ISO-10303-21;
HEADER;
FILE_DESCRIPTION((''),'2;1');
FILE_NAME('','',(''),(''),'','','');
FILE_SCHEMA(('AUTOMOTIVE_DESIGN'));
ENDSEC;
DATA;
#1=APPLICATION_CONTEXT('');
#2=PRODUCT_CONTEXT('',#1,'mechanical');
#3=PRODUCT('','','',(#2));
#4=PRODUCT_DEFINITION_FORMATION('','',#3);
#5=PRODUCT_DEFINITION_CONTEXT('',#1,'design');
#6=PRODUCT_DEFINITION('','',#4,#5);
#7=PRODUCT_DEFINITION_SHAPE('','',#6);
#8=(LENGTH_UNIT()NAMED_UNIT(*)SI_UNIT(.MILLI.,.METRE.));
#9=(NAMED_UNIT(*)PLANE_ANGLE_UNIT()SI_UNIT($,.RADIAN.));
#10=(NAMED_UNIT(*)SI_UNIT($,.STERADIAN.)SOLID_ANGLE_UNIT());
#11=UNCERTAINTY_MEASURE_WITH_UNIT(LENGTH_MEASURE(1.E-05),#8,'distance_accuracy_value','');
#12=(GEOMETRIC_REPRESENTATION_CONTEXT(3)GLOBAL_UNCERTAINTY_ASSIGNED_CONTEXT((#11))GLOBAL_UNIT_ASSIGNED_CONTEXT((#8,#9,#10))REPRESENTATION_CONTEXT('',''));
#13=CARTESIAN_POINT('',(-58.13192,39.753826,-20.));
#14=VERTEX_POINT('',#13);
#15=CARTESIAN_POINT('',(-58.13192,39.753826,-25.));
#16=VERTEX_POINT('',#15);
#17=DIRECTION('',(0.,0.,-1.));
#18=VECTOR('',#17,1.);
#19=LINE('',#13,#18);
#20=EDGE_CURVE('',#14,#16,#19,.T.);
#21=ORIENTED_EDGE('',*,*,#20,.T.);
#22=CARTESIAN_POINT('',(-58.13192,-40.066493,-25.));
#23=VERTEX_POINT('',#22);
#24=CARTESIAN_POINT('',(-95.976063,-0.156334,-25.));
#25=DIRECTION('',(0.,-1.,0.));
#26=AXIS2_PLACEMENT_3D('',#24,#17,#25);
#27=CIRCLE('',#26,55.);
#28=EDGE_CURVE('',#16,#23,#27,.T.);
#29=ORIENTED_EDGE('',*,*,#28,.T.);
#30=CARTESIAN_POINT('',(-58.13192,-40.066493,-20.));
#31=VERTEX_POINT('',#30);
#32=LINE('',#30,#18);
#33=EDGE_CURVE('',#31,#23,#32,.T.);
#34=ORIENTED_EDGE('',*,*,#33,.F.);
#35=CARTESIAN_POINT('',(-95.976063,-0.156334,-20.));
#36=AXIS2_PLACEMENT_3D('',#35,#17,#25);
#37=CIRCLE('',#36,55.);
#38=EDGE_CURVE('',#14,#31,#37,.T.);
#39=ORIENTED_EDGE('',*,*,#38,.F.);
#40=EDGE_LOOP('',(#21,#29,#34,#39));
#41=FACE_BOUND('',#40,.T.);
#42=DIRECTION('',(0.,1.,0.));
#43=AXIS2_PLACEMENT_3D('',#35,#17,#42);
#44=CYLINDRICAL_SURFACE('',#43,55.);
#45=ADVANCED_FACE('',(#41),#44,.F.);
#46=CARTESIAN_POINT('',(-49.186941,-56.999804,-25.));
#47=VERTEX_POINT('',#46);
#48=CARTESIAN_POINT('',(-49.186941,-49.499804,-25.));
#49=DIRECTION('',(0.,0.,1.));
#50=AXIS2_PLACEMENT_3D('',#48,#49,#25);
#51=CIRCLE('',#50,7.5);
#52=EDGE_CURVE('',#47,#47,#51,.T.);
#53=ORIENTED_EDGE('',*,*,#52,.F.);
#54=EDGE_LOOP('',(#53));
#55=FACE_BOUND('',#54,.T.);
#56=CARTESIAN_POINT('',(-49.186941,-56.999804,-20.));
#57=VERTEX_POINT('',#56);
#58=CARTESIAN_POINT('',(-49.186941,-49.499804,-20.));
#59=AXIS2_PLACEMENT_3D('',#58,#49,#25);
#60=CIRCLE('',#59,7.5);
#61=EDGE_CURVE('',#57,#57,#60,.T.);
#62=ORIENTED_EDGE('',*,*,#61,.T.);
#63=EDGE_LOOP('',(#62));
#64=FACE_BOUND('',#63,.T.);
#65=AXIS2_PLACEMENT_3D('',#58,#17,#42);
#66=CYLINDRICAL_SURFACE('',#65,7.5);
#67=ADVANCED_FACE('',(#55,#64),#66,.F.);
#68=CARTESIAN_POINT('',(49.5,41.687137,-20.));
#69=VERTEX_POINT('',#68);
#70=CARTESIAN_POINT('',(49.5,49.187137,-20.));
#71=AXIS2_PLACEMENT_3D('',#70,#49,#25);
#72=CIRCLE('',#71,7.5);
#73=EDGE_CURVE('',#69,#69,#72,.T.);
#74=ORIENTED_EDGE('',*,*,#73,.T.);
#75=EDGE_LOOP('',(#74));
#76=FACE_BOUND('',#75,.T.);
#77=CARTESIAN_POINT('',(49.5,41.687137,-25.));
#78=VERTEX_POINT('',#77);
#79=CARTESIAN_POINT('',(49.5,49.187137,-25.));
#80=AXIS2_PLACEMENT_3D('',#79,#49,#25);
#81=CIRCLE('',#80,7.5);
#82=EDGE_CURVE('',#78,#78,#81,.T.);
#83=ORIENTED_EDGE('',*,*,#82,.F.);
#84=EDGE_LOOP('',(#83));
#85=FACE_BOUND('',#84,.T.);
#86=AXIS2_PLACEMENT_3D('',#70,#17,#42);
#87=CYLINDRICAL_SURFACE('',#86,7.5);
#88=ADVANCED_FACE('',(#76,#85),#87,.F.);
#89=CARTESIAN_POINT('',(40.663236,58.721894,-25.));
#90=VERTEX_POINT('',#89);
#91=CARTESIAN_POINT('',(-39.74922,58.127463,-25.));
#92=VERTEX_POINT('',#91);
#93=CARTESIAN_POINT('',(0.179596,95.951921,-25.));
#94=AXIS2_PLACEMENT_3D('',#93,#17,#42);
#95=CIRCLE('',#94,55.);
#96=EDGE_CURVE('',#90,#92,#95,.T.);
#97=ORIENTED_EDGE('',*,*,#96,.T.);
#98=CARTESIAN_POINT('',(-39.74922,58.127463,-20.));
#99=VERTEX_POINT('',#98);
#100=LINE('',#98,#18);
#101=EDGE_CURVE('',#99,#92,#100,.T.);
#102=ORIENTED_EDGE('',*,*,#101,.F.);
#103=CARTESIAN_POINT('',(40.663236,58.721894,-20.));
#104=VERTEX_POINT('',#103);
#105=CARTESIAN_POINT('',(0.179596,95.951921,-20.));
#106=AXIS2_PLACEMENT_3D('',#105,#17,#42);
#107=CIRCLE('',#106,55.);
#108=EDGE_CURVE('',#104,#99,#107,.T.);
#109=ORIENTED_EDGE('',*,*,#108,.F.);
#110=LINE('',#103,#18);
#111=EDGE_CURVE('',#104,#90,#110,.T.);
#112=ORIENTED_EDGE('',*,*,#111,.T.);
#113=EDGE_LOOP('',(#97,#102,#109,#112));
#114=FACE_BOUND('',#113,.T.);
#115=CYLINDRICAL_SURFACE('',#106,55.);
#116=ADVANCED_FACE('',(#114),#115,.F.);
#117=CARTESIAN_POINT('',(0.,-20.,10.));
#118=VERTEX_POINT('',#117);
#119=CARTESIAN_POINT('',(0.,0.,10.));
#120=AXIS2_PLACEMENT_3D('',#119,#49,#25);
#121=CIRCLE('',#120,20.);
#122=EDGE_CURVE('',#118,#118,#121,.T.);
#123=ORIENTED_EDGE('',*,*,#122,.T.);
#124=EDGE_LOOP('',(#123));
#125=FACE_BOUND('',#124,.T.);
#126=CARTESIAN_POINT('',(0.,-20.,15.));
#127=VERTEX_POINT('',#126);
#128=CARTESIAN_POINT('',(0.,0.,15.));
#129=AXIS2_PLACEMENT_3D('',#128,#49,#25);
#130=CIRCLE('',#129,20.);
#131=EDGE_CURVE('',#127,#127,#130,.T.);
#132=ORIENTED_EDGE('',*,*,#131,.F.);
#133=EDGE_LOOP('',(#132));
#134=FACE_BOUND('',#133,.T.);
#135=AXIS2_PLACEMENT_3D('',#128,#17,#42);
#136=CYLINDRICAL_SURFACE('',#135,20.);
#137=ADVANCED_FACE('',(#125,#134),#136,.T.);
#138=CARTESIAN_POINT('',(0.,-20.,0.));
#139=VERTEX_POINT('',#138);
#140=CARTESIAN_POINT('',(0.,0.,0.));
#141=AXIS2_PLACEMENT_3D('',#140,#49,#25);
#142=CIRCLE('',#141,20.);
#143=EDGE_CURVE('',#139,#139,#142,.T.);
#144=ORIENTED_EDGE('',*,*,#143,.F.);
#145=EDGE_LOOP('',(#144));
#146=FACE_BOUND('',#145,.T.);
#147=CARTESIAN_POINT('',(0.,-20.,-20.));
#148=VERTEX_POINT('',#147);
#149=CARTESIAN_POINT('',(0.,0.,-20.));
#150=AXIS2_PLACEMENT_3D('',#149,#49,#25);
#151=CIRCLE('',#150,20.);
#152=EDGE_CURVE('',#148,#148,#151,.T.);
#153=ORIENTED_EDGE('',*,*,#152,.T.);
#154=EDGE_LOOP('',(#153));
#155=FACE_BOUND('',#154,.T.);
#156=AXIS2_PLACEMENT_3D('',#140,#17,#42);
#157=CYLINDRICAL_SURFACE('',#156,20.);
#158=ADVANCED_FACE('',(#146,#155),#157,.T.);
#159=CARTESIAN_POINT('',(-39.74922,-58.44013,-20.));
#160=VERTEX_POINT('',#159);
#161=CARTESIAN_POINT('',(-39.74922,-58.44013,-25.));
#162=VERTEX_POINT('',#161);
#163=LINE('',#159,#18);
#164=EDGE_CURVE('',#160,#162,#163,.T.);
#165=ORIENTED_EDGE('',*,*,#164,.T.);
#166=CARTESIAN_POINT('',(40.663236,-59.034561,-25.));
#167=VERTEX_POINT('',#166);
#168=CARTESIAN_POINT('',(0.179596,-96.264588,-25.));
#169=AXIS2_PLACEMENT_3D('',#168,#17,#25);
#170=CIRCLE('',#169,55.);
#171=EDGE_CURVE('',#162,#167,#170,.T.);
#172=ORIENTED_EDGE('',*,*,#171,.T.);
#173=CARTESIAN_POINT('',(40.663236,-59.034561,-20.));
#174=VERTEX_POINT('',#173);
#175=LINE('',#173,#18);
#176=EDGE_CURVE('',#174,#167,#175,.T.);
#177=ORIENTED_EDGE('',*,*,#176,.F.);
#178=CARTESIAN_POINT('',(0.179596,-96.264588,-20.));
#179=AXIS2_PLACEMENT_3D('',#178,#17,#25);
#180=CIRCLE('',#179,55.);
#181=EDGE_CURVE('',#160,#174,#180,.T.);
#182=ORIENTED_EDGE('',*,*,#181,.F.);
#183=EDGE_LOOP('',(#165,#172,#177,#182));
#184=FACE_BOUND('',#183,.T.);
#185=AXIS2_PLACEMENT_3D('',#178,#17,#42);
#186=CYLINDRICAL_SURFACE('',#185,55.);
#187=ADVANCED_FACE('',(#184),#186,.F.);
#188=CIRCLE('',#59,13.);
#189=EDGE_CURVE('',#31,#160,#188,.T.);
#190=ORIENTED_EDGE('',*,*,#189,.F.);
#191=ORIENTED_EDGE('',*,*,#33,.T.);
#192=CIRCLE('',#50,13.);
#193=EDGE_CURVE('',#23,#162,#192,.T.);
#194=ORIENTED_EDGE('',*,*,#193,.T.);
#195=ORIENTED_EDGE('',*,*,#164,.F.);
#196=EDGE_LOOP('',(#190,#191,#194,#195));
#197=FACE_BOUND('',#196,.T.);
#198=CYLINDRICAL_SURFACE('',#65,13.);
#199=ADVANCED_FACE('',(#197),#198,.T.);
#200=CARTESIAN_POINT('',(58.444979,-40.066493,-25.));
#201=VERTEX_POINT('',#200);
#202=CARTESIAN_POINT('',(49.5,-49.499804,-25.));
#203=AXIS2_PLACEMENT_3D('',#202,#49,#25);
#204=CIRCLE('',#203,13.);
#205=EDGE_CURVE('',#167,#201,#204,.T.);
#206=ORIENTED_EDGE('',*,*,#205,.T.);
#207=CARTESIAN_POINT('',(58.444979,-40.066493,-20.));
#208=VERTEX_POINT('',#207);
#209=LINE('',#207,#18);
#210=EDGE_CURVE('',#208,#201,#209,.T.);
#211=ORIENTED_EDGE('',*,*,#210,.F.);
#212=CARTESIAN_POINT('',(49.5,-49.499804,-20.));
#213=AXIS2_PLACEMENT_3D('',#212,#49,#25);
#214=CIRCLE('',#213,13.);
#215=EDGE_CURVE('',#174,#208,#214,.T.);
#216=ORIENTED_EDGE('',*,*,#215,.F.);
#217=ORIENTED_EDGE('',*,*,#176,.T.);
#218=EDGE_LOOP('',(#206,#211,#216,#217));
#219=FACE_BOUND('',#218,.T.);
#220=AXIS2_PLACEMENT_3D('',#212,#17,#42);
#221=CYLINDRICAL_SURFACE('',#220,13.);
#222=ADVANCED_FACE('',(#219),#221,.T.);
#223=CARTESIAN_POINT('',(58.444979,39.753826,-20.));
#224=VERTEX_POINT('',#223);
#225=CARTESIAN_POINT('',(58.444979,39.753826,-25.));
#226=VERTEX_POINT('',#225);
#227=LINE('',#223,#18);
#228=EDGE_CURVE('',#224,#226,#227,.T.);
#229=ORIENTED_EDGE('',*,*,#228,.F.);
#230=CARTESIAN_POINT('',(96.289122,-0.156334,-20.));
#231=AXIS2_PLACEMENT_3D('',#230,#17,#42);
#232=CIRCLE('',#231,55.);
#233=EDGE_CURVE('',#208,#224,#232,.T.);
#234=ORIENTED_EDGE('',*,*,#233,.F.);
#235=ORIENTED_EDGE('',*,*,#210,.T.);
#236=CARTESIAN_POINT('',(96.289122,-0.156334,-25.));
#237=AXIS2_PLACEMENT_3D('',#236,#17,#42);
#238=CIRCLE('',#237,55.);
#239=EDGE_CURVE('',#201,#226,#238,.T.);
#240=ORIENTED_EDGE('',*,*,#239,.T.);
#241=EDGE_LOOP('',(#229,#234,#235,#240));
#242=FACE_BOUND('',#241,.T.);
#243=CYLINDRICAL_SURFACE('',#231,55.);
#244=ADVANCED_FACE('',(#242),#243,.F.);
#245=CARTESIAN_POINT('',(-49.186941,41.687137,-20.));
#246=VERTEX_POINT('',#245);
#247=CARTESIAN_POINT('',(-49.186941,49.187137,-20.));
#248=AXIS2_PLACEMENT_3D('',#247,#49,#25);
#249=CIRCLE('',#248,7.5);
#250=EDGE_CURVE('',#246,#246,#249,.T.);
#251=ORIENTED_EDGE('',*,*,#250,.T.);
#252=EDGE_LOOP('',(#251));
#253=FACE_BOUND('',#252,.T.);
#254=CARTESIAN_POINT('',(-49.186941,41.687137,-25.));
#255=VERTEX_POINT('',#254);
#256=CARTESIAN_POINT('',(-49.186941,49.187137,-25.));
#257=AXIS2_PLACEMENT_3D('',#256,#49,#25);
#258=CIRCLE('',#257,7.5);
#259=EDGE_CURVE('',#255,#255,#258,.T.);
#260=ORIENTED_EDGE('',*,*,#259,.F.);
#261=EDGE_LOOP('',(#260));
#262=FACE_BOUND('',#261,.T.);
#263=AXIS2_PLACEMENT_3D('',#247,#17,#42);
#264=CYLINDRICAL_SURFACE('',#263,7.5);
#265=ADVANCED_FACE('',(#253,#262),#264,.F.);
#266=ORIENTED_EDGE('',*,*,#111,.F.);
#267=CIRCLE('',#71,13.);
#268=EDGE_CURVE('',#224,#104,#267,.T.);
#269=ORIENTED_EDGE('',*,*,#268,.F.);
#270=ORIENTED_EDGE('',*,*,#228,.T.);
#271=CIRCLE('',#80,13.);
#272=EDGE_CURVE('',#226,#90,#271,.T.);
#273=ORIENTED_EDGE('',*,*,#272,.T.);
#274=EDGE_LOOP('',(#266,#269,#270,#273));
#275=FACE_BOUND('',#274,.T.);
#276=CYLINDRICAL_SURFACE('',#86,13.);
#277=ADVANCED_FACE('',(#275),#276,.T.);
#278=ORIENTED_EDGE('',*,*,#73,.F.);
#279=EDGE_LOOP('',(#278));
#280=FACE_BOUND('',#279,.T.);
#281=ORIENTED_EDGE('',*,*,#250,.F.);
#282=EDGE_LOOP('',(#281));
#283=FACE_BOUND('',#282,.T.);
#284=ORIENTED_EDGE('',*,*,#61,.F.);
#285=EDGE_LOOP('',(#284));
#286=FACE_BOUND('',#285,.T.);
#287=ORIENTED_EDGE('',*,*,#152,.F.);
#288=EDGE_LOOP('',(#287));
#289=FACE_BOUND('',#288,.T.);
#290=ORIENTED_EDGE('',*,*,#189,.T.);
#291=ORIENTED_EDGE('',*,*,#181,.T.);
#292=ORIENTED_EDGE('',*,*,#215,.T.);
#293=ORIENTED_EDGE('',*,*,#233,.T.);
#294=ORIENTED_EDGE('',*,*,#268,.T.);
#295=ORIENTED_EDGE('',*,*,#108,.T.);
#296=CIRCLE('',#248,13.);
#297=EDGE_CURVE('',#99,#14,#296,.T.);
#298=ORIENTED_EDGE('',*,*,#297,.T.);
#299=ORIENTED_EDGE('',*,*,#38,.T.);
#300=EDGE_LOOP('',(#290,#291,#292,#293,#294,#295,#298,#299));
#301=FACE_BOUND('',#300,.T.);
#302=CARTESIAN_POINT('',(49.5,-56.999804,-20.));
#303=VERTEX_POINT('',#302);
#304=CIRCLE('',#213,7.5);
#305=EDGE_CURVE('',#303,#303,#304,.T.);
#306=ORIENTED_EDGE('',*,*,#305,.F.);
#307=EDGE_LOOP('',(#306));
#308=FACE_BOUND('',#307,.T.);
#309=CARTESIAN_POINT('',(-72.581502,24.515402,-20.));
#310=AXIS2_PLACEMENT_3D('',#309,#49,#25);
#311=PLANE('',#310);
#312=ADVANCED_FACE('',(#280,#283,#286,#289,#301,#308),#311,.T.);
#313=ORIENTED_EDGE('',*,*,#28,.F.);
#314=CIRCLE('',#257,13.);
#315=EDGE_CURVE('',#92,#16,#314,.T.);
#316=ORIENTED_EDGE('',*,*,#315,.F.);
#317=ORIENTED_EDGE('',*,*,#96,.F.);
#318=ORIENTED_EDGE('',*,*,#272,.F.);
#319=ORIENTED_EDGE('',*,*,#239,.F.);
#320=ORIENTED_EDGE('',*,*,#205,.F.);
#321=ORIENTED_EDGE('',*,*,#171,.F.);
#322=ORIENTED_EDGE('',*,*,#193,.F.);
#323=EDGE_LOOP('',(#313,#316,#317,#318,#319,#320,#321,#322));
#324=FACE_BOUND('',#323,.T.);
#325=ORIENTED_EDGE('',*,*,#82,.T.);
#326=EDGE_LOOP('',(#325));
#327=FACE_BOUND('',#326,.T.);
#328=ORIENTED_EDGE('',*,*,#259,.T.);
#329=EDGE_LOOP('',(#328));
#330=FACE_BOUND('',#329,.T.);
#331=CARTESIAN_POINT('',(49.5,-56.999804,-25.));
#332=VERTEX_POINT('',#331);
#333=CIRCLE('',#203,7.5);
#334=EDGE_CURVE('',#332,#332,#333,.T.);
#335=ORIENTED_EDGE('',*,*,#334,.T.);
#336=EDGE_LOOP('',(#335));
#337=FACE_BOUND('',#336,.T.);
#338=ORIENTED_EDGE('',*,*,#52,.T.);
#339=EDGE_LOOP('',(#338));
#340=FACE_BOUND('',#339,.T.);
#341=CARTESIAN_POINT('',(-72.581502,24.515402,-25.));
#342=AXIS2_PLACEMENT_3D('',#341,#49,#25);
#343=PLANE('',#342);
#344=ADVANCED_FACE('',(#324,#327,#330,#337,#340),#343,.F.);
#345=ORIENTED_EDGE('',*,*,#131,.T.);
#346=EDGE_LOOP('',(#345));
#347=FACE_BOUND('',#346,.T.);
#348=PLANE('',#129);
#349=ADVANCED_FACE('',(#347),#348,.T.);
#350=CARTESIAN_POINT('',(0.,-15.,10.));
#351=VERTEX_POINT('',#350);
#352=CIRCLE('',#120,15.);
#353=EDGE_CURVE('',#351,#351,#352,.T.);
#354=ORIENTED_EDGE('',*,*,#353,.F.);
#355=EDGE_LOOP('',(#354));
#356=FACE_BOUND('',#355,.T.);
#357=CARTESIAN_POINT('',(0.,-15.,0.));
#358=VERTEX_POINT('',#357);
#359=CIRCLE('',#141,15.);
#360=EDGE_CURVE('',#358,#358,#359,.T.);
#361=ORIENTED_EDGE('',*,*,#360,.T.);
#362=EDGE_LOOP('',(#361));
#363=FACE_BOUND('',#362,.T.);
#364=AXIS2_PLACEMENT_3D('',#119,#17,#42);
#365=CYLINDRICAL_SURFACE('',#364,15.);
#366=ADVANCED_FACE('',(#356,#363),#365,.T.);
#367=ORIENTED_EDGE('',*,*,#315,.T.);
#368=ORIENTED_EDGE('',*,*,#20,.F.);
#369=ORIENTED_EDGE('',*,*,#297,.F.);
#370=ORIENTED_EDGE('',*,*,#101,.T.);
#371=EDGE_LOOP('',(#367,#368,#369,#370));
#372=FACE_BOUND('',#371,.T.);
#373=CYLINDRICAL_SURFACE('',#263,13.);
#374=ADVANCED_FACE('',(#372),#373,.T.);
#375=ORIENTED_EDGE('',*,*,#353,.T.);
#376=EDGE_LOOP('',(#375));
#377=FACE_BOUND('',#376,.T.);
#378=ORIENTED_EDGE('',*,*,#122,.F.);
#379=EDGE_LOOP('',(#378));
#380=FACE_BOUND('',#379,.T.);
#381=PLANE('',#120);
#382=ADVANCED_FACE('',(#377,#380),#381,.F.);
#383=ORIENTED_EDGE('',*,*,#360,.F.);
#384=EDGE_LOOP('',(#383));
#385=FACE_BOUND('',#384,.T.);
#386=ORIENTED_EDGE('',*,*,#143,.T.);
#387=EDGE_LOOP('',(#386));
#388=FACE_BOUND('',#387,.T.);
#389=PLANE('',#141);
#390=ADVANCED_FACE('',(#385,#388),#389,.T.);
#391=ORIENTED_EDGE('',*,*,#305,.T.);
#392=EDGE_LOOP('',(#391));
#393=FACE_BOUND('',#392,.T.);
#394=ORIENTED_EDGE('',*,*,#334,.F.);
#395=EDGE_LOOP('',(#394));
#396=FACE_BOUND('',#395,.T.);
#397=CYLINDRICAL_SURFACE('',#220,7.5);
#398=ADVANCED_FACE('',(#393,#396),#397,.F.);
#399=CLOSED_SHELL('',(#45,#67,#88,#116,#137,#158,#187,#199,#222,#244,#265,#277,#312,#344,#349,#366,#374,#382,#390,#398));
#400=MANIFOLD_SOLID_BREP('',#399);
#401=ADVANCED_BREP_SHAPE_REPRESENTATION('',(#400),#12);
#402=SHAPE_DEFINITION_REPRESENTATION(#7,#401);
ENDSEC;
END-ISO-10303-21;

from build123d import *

# Parameters (mm, degrees)
SKETCH1_R             = 7.5
BOSS_EXTRUDE1_DEPTH   = 5
SKETCH3_R             = 20
BOSS_EXTRUDE2_DEPTH   = 20
SKETCH4_R             = 15
BOSS_EXTRUDE3_DEPTH   = 10
SKETCH5_R             = 20
BOSS_EXTRUDE4_DEPTH   = 5
BODY_MOVE_COPY1_ANGLE = 90


with BuildPart() as part:
    # Sketch1 → Boss-Extrude1 (new body)
    with BuildSketch(Plane(origin=(0, 0, 0), x_dir=(1, 0, 0), z_dir=(0, 1, 0))):
        with BuildLine():
            ThreePointArc((-39.749220484, 58.127463165), (-58.377062168, 58.381791069), (-58.131919931, 39.753826237))
            ThreePointArc((-58.131919931, 39.753826237), (-40.976062677, -0.15633362), (-58.131919931, -40.066493476))
            ThreePointArc((-58.131919931, -40.066493476), (-58.377062168, -58.694458308), (-39.749220484, -58.440130404))
            ThreePointArc((-39.749220484, -58.440130404), (0.58615995, -41.266091018), (40.663235765, -59.034561344))
            ThreePointArc((40.663235765, -59.034561344), (58.984188278, -58.390820393), (58.444979195, -40.066493476))
            ThreePointArc((58.444979195, -40.066493476), (41.289121941, -0.15633362), (58.444979195, 39.753826237))
            ThreePointArc((58.444979195, 39.753826237), (58.984188278, 58.078153154), (40.663235765, 58.721894105))
            ThreePointArc((40.663235765, 58.721894105), (0.58615995, 40.953423779), (-39.749220484, 58.127463165))
        make_face()
        with Locations(Location((-49.186940736, 49.187136748, 0), (0, 0, 270))):
            Circle(SKETCH1_R, mode=Mode.SUBTRACT)
        with Locations(Location((49.5, 49.187136748, 0), (0, 0, 270))):
            Circle(SKETCH1_R, mode=Mode.SUBTRACT)
        with Locations(Location((-49.186940736, -49.499803987, 0), (0, 0, 270))):
            Circle(SKETCH1_R, mode=Mode.SUBTRACT)
        with Locations(Location((49.5, -49.499803987, 0), (0, 0, 270))):
            Circle(SKETCH1_R, mode=Mode.SUBTRACT)
    extrude(amount=BOSS_EXTRUDE1_DEPTH)

    # Sketch3 → Boss-Extrude2 (add)
    with BuildSketch(Plane(origin=(0, 5, 0), x_dir=(1, 0, 0), z_dir=(0, 1, 0))):
        with Locations(Location((0, 0, 0), (0, 0, 270))):
            Circle(SKETCH3_R)
    extrude(amount=BOSS_EXTRUDE2_DEPTH)

    # Sketch4 → Boss-Extrude3 (add)
    with BuildSketch(Plane(origin=(0, 25, 0), x_dir=(1, 0, 0), z_dir=(0, 1, 0))):
        with Locations(Location((0, 0, 0), (0, 0, 270))):
            Circle(SKETCH4_R)
    extrude(amount=BOSS_EXTRUDE3_DEPTH)

    # Sketch5 → Boss-Extrude4 (add)
    with BuildSketch(Plane(origin=(0, 35, 0), x_dir=(1, 0, 0), z_dir=(0, 1, 0))):
        with Locations(Location((0, 0, 0), (0, 0, 270))):
            Circle(SKETCH5_R)
    extrude(amount=BOSS_EXTRUDE4_DEPTH)


with BuildPart() as part_1:
    # Body-Move/Copy1: read off the stored shape, not the designer's step
    # Body-Move/Copy1: moved
    add(part.part.moved(Location((0, -25, 0))).rotate(Axis((0, 0, 0), (1, 0, 0)), BODY_MOVE_COPY1_ANGLE))


solid = part_1.part
